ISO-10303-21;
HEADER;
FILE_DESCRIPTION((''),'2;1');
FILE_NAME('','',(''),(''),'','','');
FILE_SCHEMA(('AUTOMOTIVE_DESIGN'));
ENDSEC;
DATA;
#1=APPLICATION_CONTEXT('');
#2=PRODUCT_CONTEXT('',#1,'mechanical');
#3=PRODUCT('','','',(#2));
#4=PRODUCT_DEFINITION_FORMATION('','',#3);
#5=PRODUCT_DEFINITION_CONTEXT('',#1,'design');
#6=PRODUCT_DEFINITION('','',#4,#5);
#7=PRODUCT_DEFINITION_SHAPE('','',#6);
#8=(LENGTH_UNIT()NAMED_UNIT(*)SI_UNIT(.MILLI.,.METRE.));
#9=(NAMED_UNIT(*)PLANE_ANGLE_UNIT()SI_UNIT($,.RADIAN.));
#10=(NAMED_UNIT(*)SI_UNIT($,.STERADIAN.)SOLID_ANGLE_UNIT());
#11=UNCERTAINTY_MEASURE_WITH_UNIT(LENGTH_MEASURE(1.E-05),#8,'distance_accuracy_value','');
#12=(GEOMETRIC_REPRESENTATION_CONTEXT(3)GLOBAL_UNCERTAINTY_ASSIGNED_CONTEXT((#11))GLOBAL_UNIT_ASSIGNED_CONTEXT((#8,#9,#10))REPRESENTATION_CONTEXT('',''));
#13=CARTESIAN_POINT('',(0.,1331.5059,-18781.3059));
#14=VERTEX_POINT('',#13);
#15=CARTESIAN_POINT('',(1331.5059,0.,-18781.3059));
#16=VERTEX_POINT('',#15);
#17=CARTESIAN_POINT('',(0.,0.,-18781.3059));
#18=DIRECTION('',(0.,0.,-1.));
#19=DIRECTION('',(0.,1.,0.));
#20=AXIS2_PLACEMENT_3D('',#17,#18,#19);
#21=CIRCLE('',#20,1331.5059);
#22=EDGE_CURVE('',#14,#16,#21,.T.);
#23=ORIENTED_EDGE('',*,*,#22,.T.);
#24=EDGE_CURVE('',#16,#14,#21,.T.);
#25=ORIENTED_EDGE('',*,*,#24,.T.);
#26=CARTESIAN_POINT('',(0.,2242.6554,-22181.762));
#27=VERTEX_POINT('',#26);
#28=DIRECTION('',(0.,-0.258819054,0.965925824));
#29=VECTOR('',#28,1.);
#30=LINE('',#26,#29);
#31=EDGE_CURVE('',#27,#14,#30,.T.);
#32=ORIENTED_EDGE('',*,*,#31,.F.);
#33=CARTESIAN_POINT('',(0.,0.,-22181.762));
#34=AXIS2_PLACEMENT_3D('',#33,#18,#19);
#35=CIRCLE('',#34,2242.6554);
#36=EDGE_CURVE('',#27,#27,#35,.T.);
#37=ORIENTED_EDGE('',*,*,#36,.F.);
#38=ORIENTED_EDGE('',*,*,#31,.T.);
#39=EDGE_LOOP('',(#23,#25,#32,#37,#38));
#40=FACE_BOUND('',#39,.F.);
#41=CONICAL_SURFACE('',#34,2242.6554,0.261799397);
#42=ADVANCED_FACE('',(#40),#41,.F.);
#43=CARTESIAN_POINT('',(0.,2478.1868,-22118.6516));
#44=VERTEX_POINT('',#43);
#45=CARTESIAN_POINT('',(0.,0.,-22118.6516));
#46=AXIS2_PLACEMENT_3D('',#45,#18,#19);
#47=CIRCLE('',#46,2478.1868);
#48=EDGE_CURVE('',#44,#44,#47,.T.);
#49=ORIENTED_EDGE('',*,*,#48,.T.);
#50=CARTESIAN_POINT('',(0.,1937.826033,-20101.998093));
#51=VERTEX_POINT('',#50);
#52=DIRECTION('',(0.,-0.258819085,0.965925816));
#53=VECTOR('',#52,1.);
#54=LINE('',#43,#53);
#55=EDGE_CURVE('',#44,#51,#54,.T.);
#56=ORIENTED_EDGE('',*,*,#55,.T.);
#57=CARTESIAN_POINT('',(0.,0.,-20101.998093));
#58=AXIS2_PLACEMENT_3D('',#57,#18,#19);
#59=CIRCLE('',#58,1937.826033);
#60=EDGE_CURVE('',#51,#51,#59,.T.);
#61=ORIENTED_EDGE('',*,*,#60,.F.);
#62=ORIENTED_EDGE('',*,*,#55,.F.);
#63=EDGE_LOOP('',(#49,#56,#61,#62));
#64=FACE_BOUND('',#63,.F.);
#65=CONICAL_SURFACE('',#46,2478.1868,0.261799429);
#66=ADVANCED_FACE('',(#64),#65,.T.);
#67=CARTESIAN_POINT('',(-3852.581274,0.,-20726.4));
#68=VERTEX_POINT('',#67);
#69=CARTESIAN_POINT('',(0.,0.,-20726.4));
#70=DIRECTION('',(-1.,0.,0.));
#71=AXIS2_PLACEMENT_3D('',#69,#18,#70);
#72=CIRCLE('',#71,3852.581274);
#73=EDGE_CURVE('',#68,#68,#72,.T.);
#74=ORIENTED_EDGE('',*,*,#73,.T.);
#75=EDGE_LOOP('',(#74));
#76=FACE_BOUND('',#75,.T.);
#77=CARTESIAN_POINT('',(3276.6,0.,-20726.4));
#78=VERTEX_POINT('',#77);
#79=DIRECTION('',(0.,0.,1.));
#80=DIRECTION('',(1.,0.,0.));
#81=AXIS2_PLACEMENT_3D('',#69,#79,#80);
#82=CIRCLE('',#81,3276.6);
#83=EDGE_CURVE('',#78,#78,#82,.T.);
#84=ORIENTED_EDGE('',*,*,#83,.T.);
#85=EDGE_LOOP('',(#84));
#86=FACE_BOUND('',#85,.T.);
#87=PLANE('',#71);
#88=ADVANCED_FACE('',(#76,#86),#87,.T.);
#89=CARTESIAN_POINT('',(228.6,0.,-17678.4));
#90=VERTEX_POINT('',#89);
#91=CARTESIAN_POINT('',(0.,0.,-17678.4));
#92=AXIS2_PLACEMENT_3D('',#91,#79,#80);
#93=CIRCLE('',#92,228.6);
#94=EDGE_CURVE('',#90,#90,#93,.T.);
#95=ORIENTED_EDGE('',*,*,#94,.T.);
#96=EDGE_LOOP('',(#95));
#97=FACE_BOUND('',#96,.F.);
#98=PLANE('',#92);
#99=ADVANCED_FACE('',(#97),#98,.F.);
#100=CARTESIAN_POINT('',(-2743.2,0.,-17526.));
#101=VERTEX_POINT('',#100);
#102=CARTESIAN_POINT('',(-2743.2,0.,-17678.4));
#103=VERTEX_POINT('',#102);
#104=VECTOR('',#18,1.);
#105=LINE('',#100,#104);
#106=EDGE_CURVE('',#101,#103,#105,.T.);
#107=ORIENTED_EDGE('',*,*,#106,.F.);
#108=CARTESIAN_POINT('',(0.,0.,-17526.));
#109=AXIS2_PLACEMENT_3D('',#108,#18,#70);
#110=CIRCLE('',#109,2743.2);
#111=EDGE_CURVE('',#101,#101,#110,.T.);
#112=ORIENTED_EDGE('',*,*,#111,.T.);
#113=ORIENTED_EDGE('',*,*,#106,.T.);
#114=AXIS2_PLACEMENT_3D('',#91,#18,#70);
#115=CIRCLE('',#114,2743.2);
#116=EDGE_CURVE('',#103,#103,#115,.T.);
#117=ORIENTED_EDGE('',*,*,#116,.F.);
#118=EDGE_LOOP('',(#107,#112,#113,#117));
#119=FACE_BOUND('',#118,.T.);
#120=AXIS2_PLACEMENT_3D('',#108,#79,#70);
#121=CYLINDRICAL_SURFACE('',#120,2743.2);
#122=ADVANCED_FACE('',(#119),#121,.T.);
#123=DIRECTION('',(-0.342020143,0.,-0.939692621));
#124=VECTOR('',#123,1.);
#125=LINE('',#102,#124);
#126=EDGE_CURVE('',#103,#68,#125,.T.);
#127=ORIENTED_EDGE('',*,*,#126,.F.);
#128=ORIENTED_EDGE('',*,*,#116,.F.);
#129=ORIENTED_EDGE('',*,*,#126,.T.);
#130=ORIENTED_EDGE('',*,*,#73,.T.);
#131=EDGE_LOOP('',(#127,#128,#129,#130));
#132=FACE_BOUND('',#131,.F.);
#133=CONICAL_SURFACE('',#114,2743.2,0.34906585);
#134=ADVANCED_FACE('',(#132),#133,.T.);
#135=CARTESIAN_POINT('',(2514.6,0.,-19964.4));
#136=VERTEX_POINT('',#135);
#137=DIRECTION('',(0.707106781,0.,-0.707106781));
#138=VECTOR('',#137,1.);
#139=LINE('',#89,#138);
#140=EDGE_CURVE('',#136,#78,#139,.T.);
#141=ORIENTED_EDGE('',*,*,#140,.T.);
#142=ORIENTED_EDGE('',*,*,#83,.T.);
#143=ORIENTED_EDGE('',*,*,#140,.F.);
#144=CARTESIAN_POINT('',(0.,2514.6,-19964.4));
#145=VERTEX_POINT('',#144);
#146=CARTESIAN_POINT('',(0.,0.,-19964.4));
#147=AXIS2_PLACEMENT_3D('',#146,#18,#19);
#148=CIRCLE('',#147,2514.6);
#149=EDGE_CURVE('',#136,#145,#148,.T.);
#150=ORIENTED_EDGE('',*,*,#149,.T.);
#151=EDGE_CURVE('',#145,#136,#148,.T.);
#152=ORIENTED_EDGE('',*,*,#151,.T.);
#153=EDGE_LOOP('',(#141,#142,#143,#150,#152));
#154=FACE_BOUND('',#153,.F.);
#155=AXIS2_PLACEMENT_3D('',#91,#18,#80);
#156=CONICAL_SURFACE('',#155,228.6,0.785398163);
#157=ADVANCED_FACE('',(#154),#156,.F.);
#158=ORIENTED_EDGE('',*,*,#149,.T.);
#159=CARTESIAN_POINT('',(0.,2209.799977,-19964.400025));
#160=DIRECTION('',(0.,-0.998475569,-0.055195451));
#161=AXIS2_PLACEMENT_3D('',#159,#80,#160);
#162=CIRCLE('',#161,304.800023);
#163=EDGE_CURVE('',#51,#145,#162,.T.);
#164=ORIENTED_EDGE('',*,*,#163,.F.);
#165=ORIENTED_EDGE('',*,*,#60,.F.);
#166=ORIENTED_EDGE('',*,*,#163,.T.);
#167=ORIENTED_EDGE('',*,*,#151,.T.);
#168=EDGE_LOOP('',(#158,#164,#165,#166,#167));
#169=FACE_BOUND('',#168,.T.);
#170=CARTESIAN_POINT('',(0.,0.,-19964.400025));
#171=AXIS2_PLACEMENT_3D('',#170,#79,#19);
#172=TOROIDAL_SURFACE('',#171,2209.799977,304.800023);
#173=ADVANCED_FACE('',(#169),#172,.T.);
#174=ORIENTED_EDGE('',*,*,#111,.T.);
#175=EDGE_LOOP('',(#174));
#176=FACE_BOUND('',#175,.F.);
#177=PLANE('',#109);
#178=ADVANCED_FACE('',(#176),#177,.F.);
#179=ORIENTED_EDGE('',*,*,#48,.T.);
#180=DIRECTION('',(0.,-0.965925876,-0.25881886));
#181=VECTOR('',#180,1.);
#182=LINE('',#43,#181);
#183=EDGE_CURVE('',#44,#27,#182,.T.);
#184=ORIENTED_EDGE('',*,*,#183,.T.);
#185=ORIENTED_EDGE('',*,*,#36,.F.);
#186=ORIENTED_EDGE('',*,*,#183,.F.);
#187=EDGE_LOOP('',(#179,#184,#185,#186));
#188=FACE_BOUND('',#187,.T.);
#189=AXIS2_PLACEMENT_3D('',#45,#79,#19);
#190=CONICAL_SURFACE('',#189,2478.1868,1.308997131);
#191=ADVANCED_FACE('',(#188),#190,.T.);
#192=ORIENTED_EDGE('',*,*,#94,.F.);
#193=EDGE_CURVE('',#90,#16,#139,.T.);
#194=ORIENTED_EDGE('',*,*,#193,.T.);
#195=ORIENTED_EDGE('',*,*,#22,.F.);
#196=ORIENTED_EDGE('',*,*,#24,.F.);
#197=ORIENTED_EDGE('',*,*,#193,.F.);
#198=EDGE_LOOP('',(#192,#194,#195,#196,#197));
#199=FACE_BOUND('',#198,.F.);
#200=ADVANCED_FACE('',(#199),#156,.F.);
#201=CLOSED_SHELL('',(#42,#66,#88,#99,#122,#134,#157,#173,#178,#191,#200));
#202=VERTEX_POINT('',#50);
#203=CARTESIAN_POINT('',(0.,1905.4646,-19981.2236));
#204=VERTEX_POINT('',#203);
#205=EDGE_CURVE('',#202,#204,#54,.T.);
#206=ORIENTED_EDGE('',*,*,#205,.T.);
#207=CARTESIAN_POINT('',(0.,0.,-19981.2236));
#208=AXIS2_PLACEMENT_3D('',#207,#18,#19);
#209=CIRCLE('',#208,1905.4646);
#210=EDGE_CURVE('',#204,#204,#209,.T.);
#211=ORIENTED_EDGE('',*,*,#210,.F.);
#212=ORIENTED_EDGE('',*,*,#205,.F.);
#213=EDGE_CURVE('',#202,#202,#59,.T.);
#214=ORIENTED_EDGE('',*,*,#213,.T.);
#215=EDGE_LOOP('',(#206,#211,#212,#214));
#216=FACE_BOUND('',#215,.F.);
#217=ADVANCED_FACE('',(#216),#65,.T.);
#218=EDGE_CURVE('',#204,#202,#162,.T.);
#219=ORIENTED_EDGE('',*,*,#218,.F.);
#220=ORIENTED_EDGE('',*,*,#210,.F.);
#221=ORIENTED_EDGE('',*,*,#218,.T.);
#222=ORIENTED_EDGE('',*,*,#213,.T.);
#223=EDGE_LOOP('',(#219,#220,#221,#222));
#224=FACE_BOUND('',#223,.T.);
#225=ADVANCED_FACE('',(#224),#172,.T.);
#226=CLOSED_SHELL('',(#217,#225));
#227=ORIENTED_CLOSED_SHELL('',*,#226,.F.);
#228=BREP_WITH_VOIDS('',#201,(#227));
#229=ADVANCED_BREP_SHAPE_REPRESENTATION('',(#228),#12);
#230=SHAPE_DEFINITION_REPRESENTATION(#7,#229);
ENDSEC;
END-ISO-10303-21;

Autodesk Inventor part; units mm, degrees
ref_plane "YZ Plane" through (0, 0, 0) normal (1, 0, 0) x (0, 1, 0)
ref_plane "Work Plane3" through (0, 0, 17526) normal (0, 0, 1) x (1, 0, 0)
sketch "Sketch7" plane through (0, 0, 17526) normal (0, 0, 1) x (1, 0, 0)
  point P0 (0, 0)
ref_plane "Work Plane2" through (0, 0, -17526) normal (0, 0, -1) x (-1, 0, 0)
sketch "Sketch9" plane through (0, 0, -17526) normal (0, 0, -1) x (-1, 0, 0)
  circle A0 centre (0, 0) radius 2743.2
extrude "Extrusion5" add sketch "Sketch9" along normal blind 152.4
sketch "Sketch11" plane through (0, 0, -17678.4) normal (0, 0, -1) x (-1, 0, 0)
  circle A0 centre (0, 0) radius 2743.2
extrude "Extrusion7" add sketch "Sketch11" along normal blind 3048 draft 20
ref_plane "Work Plane4" through (0, 0, -17678.4) normal (0, 0, 1) x (1, 0, 0)
sketch "Sketch12" plane through (0, 0, -17678.4) normal (0, 0, 1) x (1, 0, 0)
  circle A0 centre (0, 0) radius 228.6
  dimension "d36" = 457.2
extrude "Extrusion8" cut sketch "Sketch12" against normal blind 3048 draft 45
sketch "Sketch13" plane through (0, 0, 0) normal (1, 0, 0) x (0, 1, 0)
  line L0 (0, -17526) -> (0, -19964.4)
  arc A0 (1905.4646, -19981.2236) -> (2514.6, -19964.4) centre (2209.8, -19964.4) ccw
  line L1 (1905.4646, -19981.2236) -> (4118.293, -19981.2236) construction
  line L2 (2478.1868, -22118.6516) -> (1905.4646, -19981.2236)
  line L3 (2478.1868, -22118.6516) -> (2242.6554, -22181.762)
  line L4 (2242.6554, -22181.762) -> (1331.5059, -18781.3059)
  line L5 (2514.6, -19964.4) -> (1331.5059, -18781.3059)
  point P0 (0, 0)
  point P1 (1937.8261, -20101.998)
  dimension "d39" = 2438.4
revolve "Revolution5" add sketch "Sketch13" angle 360 about axis through (0, 0, -17526) along (0, 0, -1)
properties part number "srb_thrusters_and_vectors" material "Steel, Mild"
